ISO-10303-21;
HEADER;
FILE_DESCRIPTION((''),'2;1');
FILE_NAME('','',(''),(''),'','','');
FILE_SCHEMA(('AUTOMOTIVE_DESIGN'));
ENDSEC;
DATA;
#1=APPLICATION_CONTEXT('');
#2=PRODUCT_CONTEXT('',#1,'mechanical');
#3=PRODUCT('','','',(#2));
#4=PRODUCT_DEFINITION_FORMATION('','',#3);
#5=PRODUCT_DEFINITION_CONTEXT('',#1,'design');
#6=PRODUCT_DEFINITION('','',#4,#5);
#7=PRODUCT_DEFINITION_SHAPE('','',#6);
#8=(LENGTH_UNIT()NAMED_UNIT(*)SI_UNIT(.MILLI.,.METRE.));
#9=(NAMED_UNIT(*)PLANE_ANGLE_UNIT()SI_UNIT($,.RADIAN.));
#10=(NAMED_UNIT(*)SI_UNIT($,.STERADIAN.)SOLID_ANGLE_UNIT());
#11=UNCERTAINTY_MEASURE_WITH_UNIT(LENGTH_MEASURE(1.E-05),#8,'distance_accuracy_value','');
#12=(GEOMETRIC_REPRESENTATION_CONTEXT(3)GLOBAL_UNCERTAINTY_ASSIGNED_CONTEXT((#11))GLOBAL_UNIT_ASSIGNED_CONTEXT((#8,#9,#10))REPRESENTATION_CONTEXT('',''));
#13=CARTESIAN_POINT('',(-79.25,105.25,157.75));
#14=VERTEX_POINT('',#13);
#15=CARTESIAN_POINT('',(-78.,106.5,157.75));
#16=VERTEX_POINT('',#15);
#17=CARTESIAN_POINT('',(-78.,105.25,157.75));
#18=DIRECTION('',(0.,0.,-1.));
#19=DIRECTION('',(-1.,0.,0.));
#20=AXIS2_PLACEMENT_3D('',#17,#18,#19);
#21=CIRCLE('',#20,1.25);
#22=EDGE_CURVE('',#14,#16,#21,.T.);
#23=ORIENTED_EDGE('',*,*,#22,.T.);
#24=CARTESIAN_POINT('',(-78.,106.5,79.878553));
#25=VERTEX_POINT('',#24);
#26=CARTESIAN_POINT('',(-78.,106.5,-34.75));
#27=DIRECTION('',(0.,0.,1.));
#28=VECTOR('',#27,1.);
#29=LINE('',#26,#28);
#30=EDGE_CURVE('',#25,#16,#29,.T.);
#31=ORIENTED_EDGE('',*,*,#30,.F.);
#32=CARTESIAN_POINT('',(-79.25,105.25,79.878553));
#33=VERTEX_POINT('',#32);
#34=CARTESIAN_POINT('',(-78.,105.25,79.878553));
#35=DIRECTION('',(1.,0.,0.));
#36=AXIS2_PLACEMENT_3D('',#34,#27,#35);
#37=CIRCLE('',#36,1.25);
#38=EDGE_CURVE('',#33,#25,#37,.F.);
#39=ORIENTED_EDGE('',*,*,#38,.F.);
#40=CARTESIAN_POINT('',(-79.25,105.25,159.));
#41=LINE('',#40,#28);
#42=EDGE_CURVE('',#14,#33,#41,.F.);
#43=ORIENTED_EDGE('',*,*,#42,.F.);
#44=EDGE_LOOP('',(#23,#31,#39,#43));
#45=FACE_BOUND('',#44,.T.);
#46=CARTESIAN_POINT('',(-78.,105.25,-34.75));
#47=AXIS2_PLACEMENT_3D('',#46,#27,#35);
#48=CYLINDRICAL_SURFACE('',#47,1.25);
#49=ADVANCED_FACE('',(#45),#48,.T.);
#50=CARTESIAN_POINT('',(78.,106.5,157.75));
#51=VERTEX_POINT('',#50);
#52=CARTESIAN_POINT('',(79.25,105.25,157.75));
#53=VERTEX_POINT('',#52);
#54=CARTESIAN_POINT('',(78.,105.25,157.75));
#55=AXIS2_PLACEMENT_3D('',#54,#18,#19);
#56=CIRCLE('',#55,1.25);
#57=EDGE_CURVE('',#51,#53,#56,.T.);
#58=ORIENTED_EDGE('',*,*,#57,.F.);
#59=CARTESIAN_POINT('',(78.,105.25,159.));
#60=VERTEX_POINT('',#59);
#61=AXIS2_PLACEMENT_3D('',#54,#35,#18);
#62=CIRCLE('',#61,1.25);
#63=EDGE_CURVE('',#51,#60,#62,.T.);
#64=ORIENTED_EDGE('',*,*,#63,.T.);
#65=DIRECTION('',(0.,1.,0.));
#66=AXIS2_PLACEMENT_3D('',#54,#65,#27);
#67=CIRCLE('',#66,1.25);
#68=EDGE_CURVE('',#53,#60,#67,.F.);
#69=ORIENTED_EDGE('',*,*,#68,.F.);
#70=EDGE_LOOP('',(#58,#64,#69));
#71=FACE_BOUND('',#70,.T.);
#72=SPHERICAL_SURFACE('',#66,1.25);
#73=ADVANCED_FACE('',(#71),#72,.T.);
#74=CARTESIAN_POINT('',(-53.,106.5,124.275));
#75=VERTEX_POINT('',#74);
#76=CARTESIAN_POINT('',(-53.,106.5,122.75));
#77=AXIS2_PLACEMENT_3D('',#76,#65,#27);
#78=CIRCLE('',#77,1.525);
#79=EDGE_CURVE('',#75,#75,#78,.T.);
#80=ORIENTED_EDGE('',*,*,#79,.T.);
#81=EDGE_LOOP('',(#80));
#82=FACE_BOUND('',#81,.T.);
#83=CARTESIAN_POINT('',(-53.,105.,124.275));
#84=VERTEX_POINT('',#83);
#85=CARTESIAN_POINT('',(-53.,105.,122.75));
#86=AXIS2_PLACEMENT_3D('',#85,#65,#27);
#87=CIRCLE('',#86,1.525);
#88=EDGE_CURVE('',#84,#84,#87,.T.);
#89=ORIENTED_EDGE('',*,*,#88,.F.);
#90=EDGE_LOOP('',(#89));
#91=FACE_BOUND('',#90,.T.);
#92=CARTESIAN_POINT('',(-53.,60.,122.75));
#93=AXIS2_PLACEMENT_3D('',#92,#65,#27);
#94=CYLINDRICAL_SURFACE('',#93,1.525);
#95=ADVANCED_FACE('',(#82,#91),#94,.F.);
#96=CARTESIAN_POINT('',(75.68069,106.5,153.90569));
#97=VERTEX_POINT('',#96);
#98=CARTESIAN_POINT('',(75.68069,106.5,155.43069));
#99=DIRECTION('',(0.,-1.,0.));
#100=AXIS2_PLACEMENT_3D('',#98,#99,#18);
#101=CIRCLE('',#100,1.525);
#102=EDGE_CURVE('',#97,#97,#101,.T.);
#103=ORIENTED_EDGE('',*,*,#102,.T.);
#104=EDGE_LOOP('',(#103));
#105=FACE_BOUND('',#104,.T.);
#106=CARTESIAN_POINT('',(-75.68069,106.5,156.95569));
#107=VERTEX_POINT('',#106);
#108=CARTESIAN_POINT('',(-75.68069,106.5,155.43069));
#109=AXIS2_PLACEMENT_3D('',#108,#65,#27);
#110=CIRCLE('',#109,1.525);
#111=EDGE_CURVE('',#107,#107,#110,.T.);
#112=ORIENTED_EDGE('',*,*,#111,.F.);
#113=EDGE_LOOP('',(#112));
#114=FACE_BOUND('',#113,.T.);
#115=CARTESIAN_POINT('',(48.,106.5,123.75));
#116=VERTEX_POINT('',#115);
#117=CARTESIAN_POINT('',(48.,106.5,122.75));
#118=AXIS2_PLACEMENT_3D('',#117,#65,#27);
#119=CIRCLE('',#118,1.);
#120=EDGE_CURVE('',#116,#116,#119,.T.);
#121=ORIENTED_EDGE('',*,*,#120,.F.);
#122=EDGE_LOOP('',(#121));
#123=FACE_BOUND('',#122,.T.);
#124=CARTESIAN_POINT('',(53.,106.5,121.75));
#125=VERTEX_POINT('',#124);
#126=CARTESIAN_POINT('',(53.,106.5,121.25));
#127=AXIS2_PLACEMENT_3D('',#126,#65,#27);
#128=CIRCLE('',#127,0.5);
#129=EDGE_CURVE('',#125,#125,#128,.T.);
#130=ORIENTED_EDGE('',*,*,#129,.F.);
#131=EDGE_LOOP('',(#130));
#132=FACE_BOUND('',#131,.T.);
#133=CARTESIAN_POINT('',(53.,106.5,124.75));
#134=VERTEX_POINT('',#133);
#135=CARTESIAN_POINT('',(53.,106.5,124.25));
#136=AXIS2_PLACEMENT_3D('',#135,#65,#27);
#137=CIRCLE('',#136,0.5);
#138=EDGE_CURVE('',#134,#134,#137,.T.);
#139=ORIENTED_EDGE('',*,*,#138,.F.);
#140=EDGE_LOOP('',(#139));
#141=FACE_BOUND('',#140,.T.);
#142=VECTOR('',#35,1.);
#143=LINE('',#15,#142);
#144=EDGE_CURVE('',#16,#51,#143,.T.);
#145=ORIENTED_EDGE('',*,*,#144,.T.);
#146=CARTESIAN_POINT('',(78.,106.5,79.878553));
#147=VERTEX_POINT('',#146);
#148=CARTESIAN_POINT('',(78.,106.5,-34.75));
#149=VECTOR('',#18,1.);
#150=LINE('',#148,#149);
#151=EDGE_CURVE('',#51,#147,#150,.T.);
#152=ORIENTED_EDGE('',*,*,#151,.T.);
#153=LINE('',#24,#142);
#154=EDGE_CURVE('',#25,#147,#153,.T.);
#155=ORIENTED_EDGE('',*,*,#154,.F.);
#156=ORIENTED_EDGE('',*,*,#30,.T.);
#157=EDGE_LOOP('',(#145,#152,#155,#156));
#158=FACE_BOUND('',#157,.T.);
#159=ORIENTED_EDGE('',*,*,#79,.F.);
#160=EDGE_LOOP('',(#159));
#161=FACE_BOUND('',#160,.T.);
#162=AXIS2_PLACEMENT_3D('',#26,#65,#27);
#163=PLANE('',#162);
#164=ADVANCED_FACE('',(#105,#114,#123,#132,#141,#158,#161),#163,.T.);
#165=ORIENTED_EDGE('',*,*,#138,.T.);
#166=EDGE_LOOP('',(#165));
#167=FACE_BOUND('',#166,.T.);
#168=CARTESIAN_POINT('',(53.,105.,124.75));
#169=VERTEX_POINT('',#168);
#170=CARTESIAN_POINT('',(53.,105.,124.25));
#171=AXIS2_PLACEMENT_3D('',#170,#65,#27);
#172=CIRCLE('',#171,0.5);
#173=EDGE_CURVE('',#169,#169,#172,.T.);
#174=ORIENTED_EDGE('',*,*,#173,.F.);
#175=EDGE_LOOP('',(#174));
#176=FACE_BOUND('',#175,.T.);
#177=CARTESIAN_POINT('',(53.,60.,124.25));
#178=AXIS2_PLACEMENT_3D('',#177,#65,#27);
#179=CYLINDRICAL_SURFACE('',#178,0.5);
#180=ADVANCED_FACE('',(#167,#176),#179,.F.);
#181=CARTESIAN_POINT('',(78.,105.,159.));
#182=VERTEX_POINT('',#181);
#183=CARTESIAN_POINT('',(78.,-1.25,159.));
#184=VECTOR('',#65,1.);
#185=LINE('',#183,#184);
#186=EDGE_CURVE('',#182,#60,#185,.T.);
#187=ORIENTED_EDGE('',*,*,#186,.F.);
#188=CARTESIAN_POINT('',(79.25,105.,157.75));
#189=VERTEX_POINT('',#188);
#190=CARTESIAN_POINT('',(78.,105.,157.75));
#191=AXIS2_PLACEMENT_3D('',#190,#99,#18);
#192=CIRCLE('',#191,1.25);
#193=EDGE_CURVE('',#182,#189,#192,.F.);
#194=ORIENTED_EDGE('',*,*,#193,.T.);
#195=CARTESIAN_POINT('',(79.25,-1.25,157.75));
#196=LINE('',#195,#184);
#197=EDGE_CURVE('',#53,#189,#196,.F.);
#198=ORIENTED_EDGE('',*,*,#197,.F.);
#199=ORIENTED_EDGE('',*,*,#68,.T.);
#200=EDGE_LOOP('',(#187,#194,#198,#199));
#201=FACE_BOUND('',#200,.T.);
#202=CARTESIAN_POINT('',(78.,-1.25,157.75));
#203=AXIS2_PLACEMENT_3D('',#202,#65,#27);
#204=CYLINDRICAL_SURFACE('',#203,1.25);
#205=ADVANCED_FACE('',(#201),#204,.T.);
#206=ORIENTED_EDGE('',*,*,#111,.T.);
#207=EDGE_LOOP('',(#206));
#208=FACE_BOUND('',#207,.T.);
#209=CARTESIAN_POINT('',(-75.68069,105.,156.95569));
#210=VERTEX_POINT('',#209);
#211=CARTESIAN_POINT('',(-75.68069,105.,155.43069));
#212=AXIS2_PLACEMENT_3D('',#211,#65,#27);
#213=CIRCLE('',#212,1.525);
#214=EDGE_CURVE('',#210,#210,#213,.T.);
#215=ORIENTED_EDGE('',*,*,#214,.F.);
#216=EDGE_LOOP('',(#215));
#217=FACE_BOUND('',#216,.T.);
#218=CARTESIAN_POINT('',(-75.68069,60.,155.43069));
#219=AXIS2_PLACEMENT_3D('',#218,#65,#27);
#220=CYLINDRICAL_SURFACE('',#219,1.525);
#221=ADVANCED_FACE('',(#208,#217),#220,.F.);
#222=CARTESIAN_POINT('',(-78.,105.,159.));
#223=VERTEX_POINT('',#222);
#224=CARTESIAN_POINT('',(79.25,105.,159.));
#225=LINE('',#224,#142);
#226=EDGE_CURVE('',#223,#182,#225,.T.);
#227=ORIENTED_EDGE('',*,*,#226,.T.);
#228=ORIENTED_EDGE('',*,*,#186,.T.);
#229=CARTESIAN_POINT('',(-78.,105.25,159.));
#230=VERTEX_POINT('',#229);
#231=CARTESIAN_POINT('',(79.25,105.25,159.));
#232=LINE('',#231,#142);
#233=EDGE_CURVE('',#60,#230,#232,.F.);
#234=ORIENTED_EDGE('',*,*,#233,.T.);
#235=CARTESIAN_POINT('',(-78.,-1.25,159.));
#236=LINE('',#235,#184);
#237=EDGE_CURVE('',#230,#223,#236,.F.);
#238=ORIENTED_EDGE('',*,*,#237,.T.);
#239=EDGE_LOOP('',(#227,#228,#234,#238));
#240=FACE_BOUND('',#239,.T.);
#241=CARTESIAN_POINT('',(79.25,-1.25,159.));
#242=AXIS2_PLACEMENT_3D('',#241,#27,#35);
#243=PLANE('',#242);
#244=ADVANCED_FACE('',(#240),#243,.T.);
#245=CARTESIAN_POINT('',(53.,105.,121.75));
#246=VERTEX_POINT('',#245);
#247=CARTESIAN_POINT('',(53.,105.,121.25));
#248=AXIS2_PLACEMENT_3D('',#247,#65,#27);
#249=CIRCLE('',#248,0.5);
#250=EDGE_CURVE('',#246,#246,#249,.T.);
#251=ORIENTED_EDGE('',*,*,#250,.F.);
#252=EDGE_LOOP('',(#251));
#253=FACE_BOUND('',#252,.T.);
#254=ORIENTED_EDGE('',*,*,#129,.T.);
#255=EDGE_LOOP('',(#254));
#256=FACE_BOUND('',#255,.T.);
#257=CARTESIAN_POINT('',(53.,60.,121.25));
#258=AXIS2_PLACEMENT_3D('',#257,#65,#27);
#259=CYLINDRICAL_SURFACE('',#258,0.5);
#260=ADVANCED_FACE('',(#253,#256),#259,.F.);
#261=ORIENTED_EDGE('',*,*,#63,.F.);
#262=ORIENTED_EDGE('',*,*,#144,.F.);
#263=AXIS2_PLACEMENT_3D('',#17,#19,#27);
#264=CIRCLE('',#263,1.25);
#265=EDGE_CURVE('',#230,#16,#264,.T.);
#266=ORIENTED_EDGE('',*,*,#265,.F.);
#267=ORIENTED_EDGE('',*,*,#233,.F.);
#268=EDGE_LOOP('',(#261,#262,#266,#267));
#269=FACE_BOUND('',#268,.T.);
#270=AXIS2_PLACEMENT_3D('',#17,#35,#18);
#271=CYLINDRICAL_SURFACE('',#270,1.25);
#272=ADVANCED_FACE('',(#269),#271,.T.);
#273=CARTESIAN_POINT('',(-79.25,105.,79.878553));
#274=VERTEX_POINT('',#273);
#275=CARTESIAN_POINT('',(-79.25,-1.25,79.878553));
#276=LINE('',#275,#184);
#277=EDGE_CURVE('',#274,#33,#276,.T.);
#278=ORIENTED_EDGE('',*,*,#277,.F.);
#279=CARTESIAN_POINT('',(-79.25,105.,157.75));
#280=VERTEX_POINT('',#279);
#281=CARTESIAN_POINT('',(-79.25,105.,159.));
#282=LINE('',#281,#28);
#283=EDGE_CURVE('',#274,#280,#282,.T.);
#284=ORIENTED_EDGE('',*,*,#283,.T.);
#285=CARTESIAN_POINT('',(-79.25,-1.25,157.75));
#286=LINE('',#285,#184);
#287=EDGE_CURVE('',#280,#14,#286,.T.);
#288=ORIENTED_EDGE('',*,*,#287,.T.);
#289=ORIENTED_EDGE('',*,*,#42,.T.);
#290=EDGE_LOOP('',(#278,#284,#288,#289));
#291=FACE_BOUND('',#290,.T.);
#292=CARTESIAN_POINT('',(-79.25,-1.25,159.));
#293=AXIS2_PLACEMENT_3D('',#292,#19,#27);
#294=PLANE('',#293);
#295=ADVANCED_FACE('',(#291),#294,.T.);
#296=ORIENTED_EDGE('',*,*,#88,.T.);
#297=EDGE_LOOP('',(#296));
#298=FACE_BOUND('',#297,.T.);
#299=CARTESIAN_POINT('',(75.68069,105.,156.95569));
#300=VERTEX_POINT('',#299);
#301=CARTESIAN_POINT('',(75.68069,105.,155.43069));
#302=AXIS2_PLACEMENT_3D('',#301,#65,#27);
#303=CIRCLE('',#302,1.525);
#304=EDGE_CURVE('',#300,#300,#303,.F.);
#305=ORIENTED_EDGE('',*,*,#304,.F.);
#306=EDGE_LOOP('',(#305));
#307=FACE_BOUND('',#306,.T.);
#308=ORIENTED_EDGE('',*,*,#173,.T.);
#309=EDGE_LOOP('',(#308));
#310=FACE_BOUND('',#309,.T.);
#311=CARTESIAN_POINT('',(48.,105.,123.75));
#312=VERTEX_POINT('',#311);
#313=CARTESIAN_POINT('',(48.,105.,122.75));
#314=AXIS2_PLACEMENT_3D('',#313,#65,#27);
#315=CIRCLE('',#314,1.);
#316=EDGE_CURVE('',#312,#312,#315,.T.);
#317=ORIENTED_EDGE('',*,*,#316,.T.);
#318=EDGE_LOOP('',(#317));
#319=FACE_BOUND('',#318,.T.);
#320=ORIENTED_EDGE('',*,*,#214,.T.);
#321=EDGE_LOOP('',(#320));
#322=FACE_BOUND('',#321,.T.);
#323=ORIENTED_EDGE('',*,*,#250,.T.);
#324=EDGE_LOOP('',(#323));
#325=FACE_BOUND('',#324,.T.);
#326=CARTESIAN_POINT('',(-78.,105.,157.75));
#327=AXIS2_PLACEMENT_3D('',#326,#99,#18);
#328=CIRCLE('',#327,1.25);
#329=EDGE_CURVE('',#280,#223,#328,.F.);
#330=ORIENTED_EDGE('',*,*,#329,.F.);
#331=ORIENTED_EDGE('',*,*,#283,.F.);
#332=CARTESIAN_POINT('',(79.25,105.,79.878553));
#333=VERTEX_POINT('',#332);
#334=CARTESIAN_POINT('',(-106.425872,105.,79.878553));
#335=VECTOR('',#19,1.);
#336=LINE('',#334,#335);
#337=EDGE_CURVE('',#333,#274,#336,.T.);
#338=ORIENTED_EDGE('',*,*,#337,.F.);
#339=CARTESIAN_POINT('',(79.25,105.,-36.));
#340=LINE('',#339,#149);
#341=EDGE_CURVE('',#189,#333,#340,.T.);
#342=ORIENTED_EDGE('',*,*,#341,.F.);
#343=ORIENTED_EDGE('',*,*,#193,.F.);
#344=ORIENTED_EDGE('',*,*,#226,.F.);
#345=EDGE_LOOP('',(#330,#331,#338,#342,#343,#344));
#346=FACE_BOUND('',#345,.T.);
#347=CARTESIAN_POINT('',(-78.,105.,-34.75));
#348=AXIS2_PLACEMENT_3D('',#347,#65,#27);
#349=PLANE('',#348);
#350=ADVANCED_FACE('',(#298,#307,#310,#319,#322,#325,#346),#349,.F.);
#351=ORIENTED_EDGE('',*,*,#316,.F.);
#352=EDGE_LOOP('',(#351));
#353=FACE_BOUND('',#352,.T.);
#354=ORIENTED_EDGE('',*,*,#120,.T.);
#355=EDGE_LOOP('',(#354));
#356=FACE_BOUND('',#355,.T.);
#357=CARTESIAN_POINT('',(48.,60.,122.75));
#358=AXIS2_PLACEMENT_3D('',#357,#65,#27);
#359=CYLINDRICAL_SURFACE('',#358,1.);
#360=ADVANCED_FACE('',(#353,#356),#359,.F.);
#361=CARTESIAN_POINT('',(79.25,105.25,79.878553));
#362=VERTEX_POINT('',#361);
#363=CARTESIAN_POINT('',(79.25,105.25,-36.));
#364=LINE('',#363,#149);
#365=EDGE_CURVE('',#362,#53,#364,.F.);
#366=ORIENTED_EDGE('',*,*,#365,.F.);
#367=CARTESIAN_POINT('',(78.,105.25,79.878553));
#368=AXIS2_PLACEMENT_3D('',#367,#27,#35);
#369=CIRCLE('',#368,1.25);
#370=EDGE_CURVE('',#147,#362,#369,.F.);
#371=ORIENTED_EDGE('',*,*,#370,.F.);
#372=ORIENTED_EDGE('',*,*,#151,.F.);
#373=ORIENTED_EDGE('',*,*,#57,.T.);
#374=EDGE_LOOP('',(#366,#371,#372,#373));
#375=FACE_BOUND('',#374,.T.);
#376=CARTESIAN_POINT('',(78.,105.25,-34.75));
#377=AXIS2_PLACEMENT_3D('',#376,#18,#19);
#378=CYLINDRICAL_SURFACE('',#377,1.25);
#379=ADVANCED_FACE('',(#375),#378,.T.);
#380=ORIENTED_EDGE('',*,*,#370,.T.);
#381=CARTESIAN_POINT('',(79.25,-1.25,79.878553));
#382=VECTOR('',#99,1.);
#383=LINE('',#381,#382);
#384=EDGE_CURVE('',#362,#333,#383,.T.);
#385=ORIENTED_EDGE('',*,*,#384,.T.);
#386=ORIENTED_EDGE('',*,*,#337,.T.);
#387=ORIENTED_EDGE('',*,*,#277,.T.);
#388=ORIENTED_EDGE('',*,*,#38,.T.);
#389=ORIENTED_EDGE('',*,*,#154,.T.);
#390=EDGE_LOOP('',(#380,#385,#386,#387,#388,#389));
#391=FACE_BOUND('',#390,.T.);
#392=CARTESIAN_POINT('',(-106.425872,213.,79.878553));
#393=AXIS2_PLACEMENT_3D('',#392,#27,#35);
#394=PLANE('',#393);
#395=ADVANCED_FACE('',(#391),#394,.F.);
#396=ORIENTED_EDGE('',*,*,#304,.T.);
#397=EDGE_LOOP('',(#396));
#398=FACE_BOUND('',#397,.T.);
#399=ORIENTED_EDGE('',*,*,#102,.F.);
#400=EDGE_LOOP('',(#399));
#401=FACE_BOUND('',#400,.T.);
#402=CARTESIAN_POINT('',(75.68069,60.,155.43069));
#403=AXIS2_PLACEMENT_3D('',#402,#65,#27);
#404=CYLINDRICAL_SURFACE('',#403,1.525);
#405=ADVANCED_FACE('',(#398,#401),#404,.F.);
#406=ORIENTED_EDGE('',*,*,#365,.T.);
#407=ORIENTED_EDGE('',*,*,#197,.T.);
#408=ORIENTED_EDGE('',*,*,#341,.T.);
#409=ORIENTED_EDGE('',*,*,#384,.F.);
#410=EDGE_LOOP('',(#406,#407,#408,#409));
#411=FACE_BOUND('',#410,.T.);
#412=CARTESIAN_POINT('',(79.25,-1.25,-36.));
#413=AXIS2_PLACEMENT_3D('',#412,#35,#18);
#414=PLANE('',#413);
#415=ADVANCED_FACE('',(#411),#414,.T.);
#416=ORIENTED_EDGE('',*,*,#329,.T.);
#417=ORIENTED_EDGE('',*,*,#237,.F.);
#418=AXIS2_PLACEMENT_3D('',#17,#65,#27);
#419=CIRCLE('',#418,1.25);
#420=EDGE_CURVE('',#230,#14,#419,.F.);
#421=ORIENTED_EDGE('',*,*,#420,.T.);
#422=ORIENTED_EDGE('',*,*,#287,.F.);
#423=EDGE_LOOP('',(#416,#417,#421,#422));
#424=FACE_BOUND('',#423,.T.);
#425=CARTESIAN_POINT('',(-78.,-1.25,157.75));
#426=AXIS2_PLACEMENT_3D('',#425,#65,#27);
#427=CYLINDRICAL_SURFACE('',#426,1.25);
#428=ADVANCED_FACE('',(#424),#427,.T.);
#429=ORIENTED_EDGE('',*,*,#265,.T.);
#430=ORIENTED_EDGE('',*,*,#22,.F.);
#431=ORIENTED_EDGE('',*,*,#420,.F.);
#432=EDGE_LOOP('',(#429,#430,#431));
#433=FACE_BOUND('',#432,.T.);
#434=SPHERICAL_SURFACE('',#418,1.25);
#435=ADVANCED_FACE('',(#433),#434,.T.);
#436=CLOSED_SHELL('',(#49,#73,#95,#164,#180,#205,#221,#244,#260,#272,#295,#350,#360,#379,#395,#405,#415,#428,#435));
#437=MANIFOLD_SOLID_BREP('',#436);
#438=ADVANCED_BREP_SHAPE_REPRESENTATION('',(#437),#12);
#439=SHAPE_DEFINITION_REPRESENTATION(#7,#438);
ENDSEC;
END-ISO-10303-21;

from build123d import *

# Parameters (mm, degrees)
BOSS_EXTRUDE1_DEPTH      = 1.25
SKETCH1_W                = 156
SKETCH1_H                = 69.5
BOSS_EXTRUDE2_DEPTH      = 105
SKETCH4_R                = 2.5000000000000027
BOSS_EXTRUDE3_DEPTH      = 8
FILLET2_R                = 2
SKETCH5_R                = 1.5499999999999998
SKETCH5_R_2              = 1.5500000000000012
CUT_EXTRUDE1_DEPTH       = 8
SKETCH6_R                = 8.25
CUT_EXTRUDE2_DEPTH       = 8
SKETCH8_R                = 3.750000000000007
SKETCH8_R_2              = 3.0000000000000084
SKETCH8_W                = 7.000000000000014
SKETCH8_H                = 14
CUT_EXTRUDE3_DEPTH       = 8
FILLET3_R                = 1.25
FILLET4_R                = 1.25
SKETCH11_R               = 1.5499999999999932
CUT_EXTRUDE4_DEPTH       = 8
BOSS_EXTRUDE5_REACH      = 209.004
FILLET5_R                = 1.25
SKETCH14_R               = 1.5249999999999995
CUT_EXTRUDE5_DEPTH       = 8
BOSS_EXTRUDE6_DEPTH      = 5
CUT_EXTRUDE10_DEPTH      = 176.50000000000017
CUT_EXTRUDE10_DEPTH_BACK = 9
SKETCH19_R               = 1.5249999999999995
BOSS_EXTRUDE7_DEPTH      = 1.5
SKETCH17_W               = 214.39373035957487
SKETCH17_H               = 311.75060194691184
CUT_EXTRUDE6_DEPTH       = 142.50000000000003
SKETCH18_W               = 843.8612520819788
SKETCH18_H               = 210.19069540658822
CUT_EXTRUDE7_DEPTH       = 211.50000000000009
FILLET6_R                = 1.25
SKETCH21_R               = 1.5249999999999995
CUT_EXTRUDE11_DEPTH      = 46.50000000000004
SKETCH22_R               = 1.5249999999999952
SKETCH22_R_2             = 0.49999999999999917
SKETCH22_R_3             = 0.9999999999999983
CUT_EXTRUDE12_DEPTH      = 46.50000000000004
SKETCH23_W               = 224.34927592813784
SKETCH23_H               = 20
CUT_EXTRUDE13_DEPTH      = 108.00000000000004
SKETCH24_W               = 191.54769742783472
SKETCH24_H               = 65.90413284325967
CUT_EXTRUDE14_DEPTH      = 151.00000000000006


with BuildPart() as part:
    # Sketch2 → Boss-Extrude1 (new body)
    with BuildSketch(Plane(origin=(0, 0, 0), x_dir=(1, 0, 0), z_dir=(0, 1, 0))):
        Polygon((-79.25000000000004, 35.99999999999998), (79.24999999999996, 35.99999999999999), (79.24999999999999, -159.00000000000003), (-79.25000000000001, -159.00000000000003), align=None)
    extrude(amount=-BOSS_EXTRUDE1_DEPTH)

    # Sketch1 → Boss-Extrude2 (add)
    with BuildSketch(Plane(origin=(0, 0, 0), x_dir=(1, 0, 0), z_dir=(0, 1, 0))):
        Polygon((79.24999999999999, -159.00000000000003), (-79.25000000000001, -159.00000000000003), (-79.25000000000004, -86.00000000000001), (-79.25000000000004, -36.00000000000002), (-79.25000000000004, 35.99999999999998), (79.24999999999996, 35.99999999999999), (79.24999999999996, -36.00000000000002), (79.24999999999996, -86.00000000000001), align=None)
        Polygon((-78.00000000000001, -157.75000000000006), (77.99999999999999, -157.75000000000006), (77.99999999999996, -86.00000000000001), (77.99999999999996, -36.00000000000002), (-78.00000000000004, -36.00000000000002), (-78.00000000000004, -86.00000000000001), (-78.00000000000004, -100.58859756900745), align=None, mode=Mode.SUBTRACT)
        Rectangle(SKETCH1_W, SKETCH1_H, mode=Mode.SUBTRACT)
    extrude(amount=BOSS_EXTRUDE2_DEPTH)

    # Sketch4 → Boss-Extrude3 (add)
    with BuildSketch(Plane(origin=(0, 0, 0), x_dir=(1, 0, 0), z_dir=(0, 1, 0))):
        with Locations(Location((-37.074999999999996, -117.75000000000004, 0), (0, 0, 90))):
            Circle(SKETCH4_R)
        with Locations(Location((37.074999999999996, -117.75000000000003, 0), (0, 0, 90))):
            Circle(SKETCH4_R)
    extrude(amount=BOSS_EXTRUDE3_DEPTH)

    # Fillet2
    fillet2_edges = [part.edges().sort_by_distance(p)[0] for p in [
        (77.99999999999996, 52.5, -34.749999999999986),
        (77.99999999999996, 52.5, 34.750000000000014),
        (-78.00000000000004, 0, 1.421e-14),
        (-78.00000000000004, 52.5, 34.750000000000014),
        (77.99999999999999, 52.5, 157.75000000000006),
        (-78.00000000000001, 52.5, 157.75000000000006),
        (-4.263e-14, 0, 36.00000000000002),
        (-78.00000000000004, 52.5, 36.00000000000002),
        (77.99999999999997, 0, 96.87500000000003),
        (77.99999999999996, 52.5, 36.00000000000002),
        (-4.263e-14, 0, -34.749999999999986),
        (-78.00000000000004, 52.5, -34.749999999999986),
        (-1.421e-14, 0, 157.75000000000006),
        (-78.00000000000003, 0, 96.87500000000004),
        (77.99999999999996, 0, 1.421e-14),
        (-4.263e-14, 0, 34.750000000000014),
        (-37.074999999999996, 0, 120.25000000000004),
        (37.074999999999996, 0, 120.25000000000003),
    ]]
    fillet(fillet2_edges, radius=FILLET2_R)

    # Sketch5 → Cut-Extrude1 (cut)
    with BuildSketch(Plane.XY.offset(36.00000000000002)):
        with BuildLine():
            ThreePointArc((-53.750000000000085, 99.54999999999998), (-54.84601551083924, 99.09601551083914), (-55.30000000000008, 97.99999999999999))
            Line((-55.30000000000008, 97.99999999999999), (-53.750000000000085, 97.99999999999999))
            Line((-53.750000000000085, 97.99999999999999), (-53.750000000000085, 99.54999999999998))
        make_face()
        with BuildLine():
            Line((-53.750000000000085, 97.99999999999999), (-55.30000000000008, 97.99999999999999))
            ThreePointArc((-55.30000000000008, 97.99999999999999), (-53.750000000000085, 96.44999999999999), (-52.20000000000009, 97.99999999999999))
            ThreePointArc((-52.20000000000009, 97.99999999999999), (-52.65398448916093, 99.09601551083914), (-53.750000000000085, 99.54999999999998))
            Line((-53.750000000000085, 99.54999999999998), (-53.750000000000085, 97.99999999999999))
        make_face()
        with Locations((53.750000000000206, 97.99999999999967)):
            Circle(SKETCH5_R)
        with Locations((-53.750000000000085, 7.999999999999743)):
            Circle(SKETCH5_R_2)
        with Locations((53.749999999999666, 7.9999999999994245)):
            Circle(SKETCH5_R_2)
    extrude(amount=-CUT_EXTRUDE1_DEPTH, mode=Mode.SUBTRACT)

    # Sketch6 → Cut-Extrude2 (cut)
    with BuildSketch(Plane(origin=(0, 0, 157.75000000000006), x_dir=(-1, 0, 0), z_dir=(0, 0, -1))):
        with Locations((0, 22)):
            Circle(SKETCH6_R)
    extrude(amount=-CUT_EXTRUDE2_DEPTH, mode=Mode.SUBTRACT)

    # Sketch8 → Cut-Extrude3 (cut)
    with BuildSketch(Plane.ZY.offset(79.25000000000004)):
        with Locations((131.5, 54.99999999999998)):
            Circle(SKETCH8_R)
        with Locations((101.50000000000001, 54.99999999999998)):
            Circle(SKETCH8_R_2)
        with Locations((116.50000000000003, 64.99999999999999)):
            Rectangle(SKETCH8_W, SKETCH8_H)
        with Locations((101.50000000000001, 64.99999999999997)):
            Circle(SKETCH8_R_2)
        with Locations((101.50000000000001, 74.99999999999997)):
            Circle(SKETCH8_R_2)
        with Locations((101.50000000000001, 84.99999999999997)):
            Circle(SKETCH8_R_2)
        with Locations((131.5, 74.99999999999999)):
            Circle(SKETCH8_R)
    extrude(amount=-CUT_EXTRUDE3_DEPTH, mode=Mode.SUBTRACT)

    # Fillet3
    fillet3_edges = [part.edges().sort_by_distance(p)[0] for p in [
        (79.24999999999997, -1.25, 61.50000000000002),
        (-4.263e-14, -1.25, -35.999999999999986),
        (-79.25000000000003, -1.25, 61.50000000000003),
        (-1.421e-14, -1.25, 159.00000000000003),
    ]]
    fillet(fillet3_edges, radius=FILLET3_R)

    # Fillet4
    # the kernel refuses this fillet: 1.25 mm, written as the material it takes off along each edge
    with BuildSketch(Plane(origin=(-78.00000000000004, 0, -34.74999999999997), x_dir=(-9e-17, 0, -1), z_dir=(-1, 0, 1.5e-16))) as fillet4_piece_1_section:
        Polygon((0, 0), (FILLET4_R, 0), (FILLET4_R, FILLET4_R), (0, FILLET4_R), align=None)
    fillet4_piece_1 = extrude(amount=FILLET4_R, mode=Mode.PRIVATE)
    fillet4_piece_1 = fillet4_piece_1 - Plane(origin=(-78.00000000000004, 0, -34.74999999999997), x_dir=(0, 0.7071067811865475, 0.7071067811865475), z_dir=(-1, 0, 1.5e-16)) * Sphere(FILLET4_R, mode=Mode.PRIVATE)
    add(fillet4_piece_1, mode=Mode.SUBTRACT)
    with BuildSketch(Plane(origin=(77.99999999999996, 0, -34.74999999999999), x_dir=(-9e-17, 0, -1), z_dir=(1, 0, -1.5e-16))) as fillet4_piece_2_section:
        Polygon((0, 0), (FILLET4_R, 0), (FILLET4_R, -FILLET4_R), (0, -FILLET4_R), align=None)
    fillet4_piece_2 = extrude(amount=FILLET4_R, mode=Mode.PRIVATE)
    fillet4_piece_2 = fillet4_piece_2 - Plane(origin=(77.99999999999996, 0, -34.74999999999999), x_dir=(0, 0.7071067811865475, 0.7071067811865475), z_dir=(1, 0, -1.5e-16)) * Sphere(FILLET4_R, mode=Mode.PRIVATE)
    add(fillet4_piece_2, mode=Mode.SUBTRACT)
    with BuildSketch(Plane(origin=(-78.00000000000001, 0, 157.75000000000003), x_dir=(-1, 0, 1.5e-16), z_dir=(0, 0, 1))) as fillet4_piece_3_section:
        Polygon((0, 0), (FILLET4_R, 0), (FILLET4_R, FILLET4_R), (0, FILLET4_R), align=None)
    fillet4_piece_3 = extrude(amount=FILLET4_R, mode=Mode.PRIVATE)
    fillet4_piece_3 = fillet4_piece_3 - Plane(origin=(-78.00000000000001, 0, 157.75000000000003), x_dir=(0.7071067811865475, 0.7071067811865475, 0), z_dir=(0, 0, 1)) * Sphere(FILLET4_R, mode=Mode.PRIVATE)
    add(fillet4_piece_3, mode=Mode.SUBTRACT)
    with BuildSketch(Plane(origin=(77.99999999999999, 0, 157.75000000000003), x_dir=(1, 0, -1.5e-16), z_dir=(0, 0, 1))) as fillet4_piece_4_section:
        Polygon((0, 0), (FILLET4_R, 0), (FILLET4_R, -FILLET4_R), (0, -FILLET4_R), align=None)
    fillet4_piece_4 = extrude(amount=FILLET4_R, mode=Mode.PRIVATE)
    fillet4_piece_4 = fillet4_piece_4 - Plane(origin=(77.99999999999999, 0, 157.75000000000003), x_dir=(-0.7071067811865475, 0.7071067811865475, 0), z_dir=(0, 0, 1)) * Sphere(FILLET4_R, mode=Mode.PRIVATE)
    add(fillet4_piece_4, mode=Mode.SUBTRACT)
    with BuildSketch(Plane(origin=(79.24999999999999, 108.12500000000007, 159.00000000000003), x_dir=(-1, 0, 0), z_dir=(0, -1, 0))) as fillet4_piece_5:
        with BuildLine():
            CenterArc((FILLET4_R, FILLET4_R), FILLET4_R, 179.9999999999987, 90.00000000000131)
            Line((0, FILLET4_R), (0, 0))
            Line((0, 0), (FILLET4_R, 0))
        make_face()
    extrude(amount=108.12500000000007, mode=Mode.SUBTRACT)
    with BuildSketch(Plane(origin=(-79.25000000000001, -2.2e-16, 159.00000000000003), x_dir=(1, 0, 0), z_dir=(0, 1, 0))) as fillet4_piece_6:
        with BuildLine():
            CenterArc((FILLET4_R, FILLET4_R), FILLET4_R, 180, 90)
            Line((0, FILLET4_R), (0, 0))
            Line((0, 0), (FILLET4_R, 0))
        make_face()
    extrude(amount=108.12499999999999, mode=Mode.SUBTRACT)
    with BuildSketch(Plane(origin=(79.24999999999996, 108.125, -35.99999999999999), x_dir=(0, 0, 1), z_dir=(0, -1, 0))) as fillet4_piece_7:
        with BuildLine():
            CenterArc((FILLET4_R, FILLET4_R), FILLET4_R, 180, 90)
            Line((0, FILLET4_R), (0, 0))
            Line((0, 0), (FILLET4_R, 0))
        make_face()
    extrude(amount=108.125, mode=Mode.SUBTRACT)
    with BuildSketch(Plane(origin=(-79.25000000000004, -2.2e-16, -35.99999999999998), x_dir=(0, 0, 1), z_dir=(0, 1, 0))) as fillet4_piece_8:
        with BuildLine():
            CenterArc((FILLET4_R, FILLET4_R), FILLET4_R, 180, 90)
            Line((-2.132e-14, FILLET4_R), (0, 0))
            Line((0, 0), (FILLET4_R, 0))
        make_face()
    extrude(amount=108.12499999999999, mode=Mode.SUBTRACT)

    # Sketch11 → Cut-Extrude4 (cut)
    with BuildSketch(Plane(origin=(79.24999999999996, 0, -1.128e-14), x_dir=(-1.4e-16, 0, -1), z_dir=(1, 0, -1.4e-16))):
        with BuildLine():
            ThreePointArc((-13.05000000000001, 102.49999999999999), (-12.596015510839159, 101.40398448916083), (-11.50000000000001, 100.94999999999999))
            Line((-11.50000000000001, 100.94999999999999), (-11.50000000000001, 102.49999999999999))
            Line((-11.500000000000014, 102.49999999999999), (-13.050000000000011, 102.49999999999999))
        make_face()
        with BuildLine():
            Line((-11.50000000000001, 102.49999999999999), (-11.50000000000001, 100.94999999999999))
            ThreePointArc((-11.50000000000001, 100.94999999999999), (-10.403984489160864, 101.40398448916083), (-9.950000000000012, 102.49999999999999))
            ThreePointArc((-9.950000000000012, 102.49999999999999), (-11.50000000000001, 104.04999999999998), (-13.05000000000001, 102.49999999999999))
            Line((-13.050000000000011, 102.49999999999999), (-11.500000000000014, 102.49999999999999))
        make_face()
        with BuildLine():
            ThreePointArc((-25.550000000000008, 90), (-25.096015510839155, 88.90398448916085), (-24.000000000000007, 88.45))
            Line((-24.000000000000007, 88.45000000000002), (-24.000000000000007, 90))
            Line((-24, 90), (-25.55000000000001, 90))
        make_face()
        with BuildLine():
            Line((-24.000000000000007, 90), (-24.000000000000007, 88.45000000000002))
            ThreePointArc((-24.000000000000007, 88.45), (-22.90398448916086, 88.90398448916085), (-22.450000000000006, 90))
            ThreePointArc((-22.450000000000006, 90), (-24.000000000000007, 91.55), (-25.550000000000008, 90))
            Line((-25.55000000000001, 90), (-24, 90))
        make_face()
        with BuildLine():
            ThreePointArc((-9.949999999999998, 2.4999999999999742), (-10.403984489160848, 3.5960155108391216), (-11.499999999999995, 4.049999999999974))
            Line((-11.499999999999996, 4.049999999999969), (-11.499999999999996, 2.4999999999999716))
            Line((-11.5, 2.4999999999999742), (-13.049999999999997, 2.4999999999999742))
            ThreePointArc((-13.049999999999995, 2.4999999999999742), (-11.499999999999996, 0.9499999999999749), (-9.949999999999998, 2.499999999999974))
        make_face()
        with BuildLine():
            Line((-11.499999999999996, 2.4999999999999716), (-11.499999999999996, 4.049999999999969))
            ThreePointArc((-11.499999999999995, 4.049999999999974), (-12.596015510839145, 3.596015510839123), (-13.049999999999995, 2.4999999999999742))
            Line((-13.049999999999997, 2.4999999999999742), (-11.5, 2.4999999999999742))
        make_face()
        with BuildLine():
            ThreePointArc((-111.5, 4.049999999999969), (-112.59601551083915, 1.40398448916083), (-109.95, 2.499999999999974))
            Line((-109.95, 2.4999999999999742), (-111.5, 2.4999999999999742))
            Line((-111.5, 2.4999999999999716), (-111.5, 4.049999999999969))
        make_face()
        with BuildLine():
            Line((-111.5, 2.4999999999999742), (-109.95, 2.4999999999999742))
            ThreePointArc((-109.95, 2.4999999999999742), (-110.40398448916086, 3.5960155108391185), (-111.5, 4.049999999999969))
            Line((-111.5, 4.049999999999969), (-111.5, 2.4999999999999716))
        make_face()
        with BuildLine():
            ThreePointArc((-97.45, 14.999999999999993), (-97.90398448916086, 16.096015510839138), (-99, 16.549999999999986))
            Line((-99, 16.549999999999986), (-99, 14.999999999999993))
            Line((-99, 14.999999999999993), (-97.45, 14.999999999999993))
        make_face()
        with BuildLine():
            Line((-99, 14.999999999999993), (-99, 16.549999999999986))
            ThreePointArc((-99, 16.549999999999986), (-100.09601551083915, 13.903984489160848), (-97.45, 14.999999999999993))
            Line((-97.45, 14.999999999999993), (-99, 14.999999999999993))
        make_face()
        with BuildLine():
            ThreePointArc((-22.450000000000006, 14.999999999999993), (-22.90398448916086, 16.09601551083914), (-24.000000000000007, 16.549999999999994))
            Line((-24.000000000000007, 16.549999999999994), (-24.000000000000007, 14.999999999999993))
            Line((-24, 14.999999999999993), (-25.55000000000001, 14.999999999999993))
            ThreePointArc((-25.550000000000008, 14.999999999999993), (-24.000000000000007, 13.449999999999992), (-22.450000000000006, 14.999999999999993))
        make_face()
        with BuildLine():
            Line((-24.000000000000007, 14.999999999999993), (-24.000000000000007, 16.549999999999994))
            ThreePointArc((-24.000000000000007, 16.549999999999994), (-25.096015510839155, 16.09601551083914), (-25.550000000000008, 14.999999999999993))
            Line((-25.55000000000001, 14.999999999999993), (-24, 14.999999999999993))
        make_face()
        with Locations((-111.50000000000001, 102.49999999999999)):
            Circle(SKETCH11_R)
        with Locations((-99, 90)):
            Circle(SKETCH11_R)
    extrude(amount=-CUT_EXTRUDE4_DEPTH, mode=Mode.SUBTRACT)

    # Boss-Extrude5: up to this face of the body (flat: up to its plane)
    boss_extrude5_end = Plane(part.part.faces().sort_by_distance((0, 0, 96.725539908))[0])
    # Sketch12 → Boss-Extrude5 (add, up to the picked face)
    with BuildSketch(Plane(origin=(0, 105, 0), x_dir=(1, 0, 0), z_dir=(0, 1, 0)), mode=Mode.PRIVATE) as boss_extrude5_sk1:
        with BuildLine():
            Line((73, -152.75000000000043), (72.99999999999997, -157.75000000000043))
            Line((72.99999999999997, -157.75000000000043), (75.99999999999996, -157.75000000000045))
            ThreePointArc((75.99999999999996, -157.75000000000006), (77.41421356237305, -157.16421356237316), (77.99999999999994, -155.75000000000006))
            Line((77.99999999999999, -155.75000000000006), (78, -152.75000000000045))
            Line((78, -152.75000000000045), (73, -152.75000000000043))
        make_face()
    boss_extrude5_tool1 = split(extrude(boss_extrude5_sk1.sketch, amount=-BOSS_EXTRUDE5_REACH, mode=Mode.PRIVATE), bisect_by=boss_extrude5_end, keep=Keep.BOTH, mode=Mode.PRIVATE)
    # Sketch12 → Boss-Extrude5 (add, up to the picked face)
    with BuildSketch(Plane(origin=(0, 105, 0), x_dir=(1, 0, 0), z_dir=(0, 1, 0)), mode=Mode.PRIVATE) as boss_extrude5_sk2:
        with BuildLine():
            ThreePointArc((-78.00000000000003, -155.75000000000006), (-77.41421356237313, -157.16421356237316), (-76.00000000000003, -157.75000000000006))
            Line((-76.00000000000003, -157.75000000000006), (-73.00000000000003, -157.75000000000006))
            Line((-73.00000000000003, -157.75000000000006), (-73.00000000000003, -152.75000000000006))
            Line((-73.00000000000003, -152.75000000000006), (-78.00000000000003, -152.75000000000006))
            Line((-78.00000000000003, -152.75000000000006), (-78.00000000000003, -155.75000000000006))
        make_face()
    boss_extrude5_tool2 = split(extrude(boss_extrude5_sk2.sketch, amount=-BOSS_EXTRUDE5_REACH, mode=Mode.PRIVATE), bisect_by=boss_extrude5_end, keep=Keep.BOTH, mode=Mode.PRIVATE)
    add(boss_extrude5_tool1.solids().sort_by(Axis((75.426992, 105, 155.176992), (0, -1, 0)))[0])
    add(boss_extrude5_tool2.solids().sort_by(Axis((-75.426992, 105, 155.176992), (0, -1, 0)))[0])

    # Fillet5
    fillet5_edges = [part.edges().sort_by_distance(p)[0] for p in [
        (77.41421356237306, 0.5857864376269042, 152.75000000000043),
        (72.99999999999999, 0.5857864376269046, 157.16421356237316),
        (72.99999999999997, 53.5, 157.75000000000043),
        (74.49999999999999, 0, 152.75000000000043),
        (73, 52.5, 152.75000000000043),
        (78, 53.5, 152.75000000000045),
        (73, 0, 154.25000000000023),
        (-77.41421356237313, 0.5857864376269042, 152.75000000000006),
        (-73.00000000000003, 0, 154.25000000000006),
        (-73.00000000000003, 52.5, 152.75000000000006),
        (-78.00000000000003, 53.5, 152.75000000000006),
        (-74.50000000000003, 0, 152.75000000000006),
        (-73.00000000000003, 0.5857864376269046, 157.16421356237316),
        (-73.00000000000003, 53.5, 157.75000000000006),
    ]]
    fillet(fillet5_edges, radius=FILLET5_R)

    # Sketch14 → Cut-Extrude5 (cut)
    with BuildSketch(Plane(origin=(0, 105, 0), x_dir=(1, 0, 0), z_dir=(0, 1, 0))):
        with Locations(Location((75.68305826175839, -155.43305826175865, 0), (0, 0, 270))):
            Circle(SKETCH14_R)
        with Locations(Location((-75.68305826175845, -155.43305826175828, 0), (0, 0, 270))):
            Circle(SKETCH14_R)
    extrude(amount=-CUT_EXTRUDE5_DEPTH, mode=Mode.SUBTRACT)

    # Sketch19 → Cut-Extrude10 (cut, two sides: drawn at the far end of the back side and taken through both)
    with BuildSketch(Plane(origin=(0, 105, 0), x_dir=(1, 0, 0), z_dir=(0, 1, 0)).offset(-CUT_EXTRUDE10_DEPTH_BACK)):
        with Locations(Location((75.68305826175839, -155.43305826175865, 0), (0, 0, 270))):
            Circle(SKETCH19_R)
        with Locations(Location((-75.68305826175845, -155.43305826175828, 0), (0, 0, 270))):
            Circle(SKETCH19_R)
    extrude(amount=CUT_EXTRUDE10_DEPTH + CUT_EXTRUDE10_DEPTH_BACK, mode=Mode.SUBTRACT)



with BuildPart() as body_2:
    # Sketch15 → Boss-Extrude6 (new body)
    with BuildSketch(Plane(origin=(0, 105, 0), x_dir=(1, 0, 0), z_dir=(0, 1, 0))):
        with BuildLine():
            Line((-77.50000000000004, 32.749999999999986), (-77.50000000000004, -32.750000000000014))
            ThreePointArc((-77.50000000000004, -32.750000000000014), (-77.06066017177986, -33.81066017177984), (-76.00000000000004, -34.250000000000014))
            Line((-76.00000000000004, -34.250000000000014), (75.99999999999996, -34.250000000000014))
            ThreePointArc((75.99999999999996, -34.250000000000014), (77.06066017177977, -33.81066017177984), (77.49999999999996, -32.750000000000014))
            Line((77.49999999999996, -32.750000000000014), (77.49999999999996, 32.749999999999986))
            ThreePointArc((77.49999999999996, 32.749999999999986), (77.06066017177977, 33.81066017177981), (75.99999999999996, 34.249999999999986))
            Line((75.99999999999996, 34.249999999999986), (-76.00000000000004, 34.249999999999986))
            ThreePointArc((-76.00000000000004, 34.249999999999986), (-77.06066017177986, 33.81066017177981), (-77.50000000000004, 32.749999999999986))
        make_face()
        with BuildLine():
            Line((75.99999999999996, 32.999999999999986), (-76.00000000000004, 32.999999999999986))
            ThreePointArc((-76.00000000000004, 32.999999999999986), (-76.17677669529668, 32.926776695296624), (-76.25000000000004, 32.749999999999986))
            Line((-76.25000000000004, 32.749999999999986), (-76.25000000000004, -32.750000000000014))
            ThreePointArc((-76.25000000000004, -32.750000000000014), (-76.17677669529668, -32.92677669529665), (-76.00000000000004, -33.000000000000014))
            Line((-76.00000000000004, -33.000000000000014), (75.99999999999996, -33.000000000000014))
            ThreePointArc((75.99999999999996, -33.000000000000014), (76.1767766952966, -32.92677669529665), (76.24999999999996, -32.750000000000014))
            Line((76.24999999999996, -32.750000000000014), (76.24999999999996, 32.749999999999986))
            ThreePointArc((76.24999999999996, 32.749999999999986), (76.1767766952966, 32.926776695296624), (75.99999999999996, 32.999999999999986))
        make_face(mode=Mode.SUBTRACT)
    extrude(amount=-BOSS_EXTRUDE6_DEPTH)


with BuildPart() as part_1:
    add(part.part)

    add(body_2.part)  # Boss-Extrude7 merges body 2
    # Sketch16 → Boss-Extrude7 (add)
    with BuildSketch(Plane(origin=(0, 105, 0), x_dir=(1, 0, 0), z_dir=(0, 1, 0))):
        with BuildLine():
            Line((-79.25000000000004, 34.74999999999998), (-79.25000000000004, -157.75000000000003))
            ThreePointArc((-79.25000000000004, -157.75000000000003), (-78.88388347648322, -158.63388347648322), (-78.00000000000001, -159.00000000000003))
            Line((-78.00000000000001, -159.00000000000003), (77.99999999999999, -159.00000000000003))
            ThreePointArc((77.99999999999999, -159.00000000000003), (78.88388347648316, -158.63388347648322), (79.24999999999999, -157.75000000000003))
            Line((79.24999999999999, -157.75000000000003), (79.24999999999991, 34.749999999999986))
            ThreePointArc((79.24999999999991, 34.749999999999986), (78.8838834764831, 35.63388347648314), (77.99999999999996, 35.99999999999997))
            Line((77.99999999999996, 35.99999999999997), (-78.00000000000004, 35.99999999999998))
            ThreePointArc((-78.00000000000004, 35.99999999999998), (-78.88388347648322, 35.63388347648316), (-79.25000000000004, 34.74999999999998))
        make_face()
    extrude(amount=BOSS_EXTRUDE7_DEPTH)

    # Sketch17 → Cut-Extrude6 (cut)
    with BuildSketch(Plane.XZ.offset(-105)):
        with Locations((-9.695908791144348, 54.3605461890202)):
            Rectangle(SKETCH17_W, SKETCH17_H)
        with BuildLine():
            Line((77.99999999999996, -32.749999999999986), (77.99999999999996, 32.750000000000014))
            ThreePointArc((77.99999999999996, 32.750000000000014), (77.41421356237305, 34.16421356237311), (75.99999999999996, 34.750000000000014))
            Line((75.99999999999996, 34.750000000000014), (-76.00000000000004, 34.750000000000014))
            ThreePointArc((-76.00000000000004, 34.750000000000014), (-77.41421356237313, 34.16421356237311), (-78.00000000000004, 32.750000000000014))
            Line((-78.00000000000004, 32.750000000000014), (-78.00000000000004, -32.749999999999986))
            ThreePointArc((-78.00000000000004, -32.749999999999986), (-77.41421356237313, -34.16421356237308), (-76.00000000000004, -34.749999999999986))
            Line((-76.00000000000004, -34.749999999999986), (75.99999999999996, -34.749999999999986))
            ThreePointArc((75.99999999999996, -34.749999999999986), (77.41421356237305, -34.16421356237308), (77.99999999999996, -32.749999999999986))
        make_face(mode=Mode.SUBTRACT)
    extrude(amount=CUT_EXTRUDE6_DEPTH, mode=Mode.SUBTRACT)


with BuildPart() as cut_extrude6_piece_1:
    # of the separate pieces the step leaves, piece 1, a body of its own (cut_extrude6_pieces)
    add(part_1.part.solids().sort_by_distance((-76, 105, -34.25))[0])

    # Fillet6
    fillet6_edges = [cut_extrude6_piece_1.edges().sort_by_distance(p)[0] for p in [
        (-78.88388347648322, 106.5, -35.633883476483156),
        (-79.25000000000004, 106.5, 61.50000000000002),
        (-78.88388347648322, 106.5, 158.63388347648322),
        (-1.421e-14, 106.5, 159.00000000000003),
        (78.88388347648318, 106.5, 158.63388347648322),
        (79.24999999999994, 106.5, 61.50000000000003),
        (78.8838834764831, 106.5, -35.63388347648314),
        (-4.263e-14, 106.5, -35.99999999999997),
    ]]
    fillet(fillet6_edges, radius=FILLET6_R)

    # Sketch21 → Cut-Extrude11 (cut)
    with BuildSketch(Plane(origin=(0, 106.5, 0), x_dir=(1, 0, 0), z_dir=(0, 1, 0))):
        with Locations(Location((-75.68068975770814, -155.43068975770817, 0), (0, 0, 270))):
            Circle(SKETCH21_R)
        with Locations(Location((75.68068975770811, -155.43068975770834, 0), (0, 0, 270))):
            Circle(SKETCH21_R)
    extrude(amount=-CUT_EXTRUDE11_DEPTH, mode=Mode.SUBTRACT)

    # Sketch22 → Cut-Extrude12 (cut)
    with BuildSketch(Plane(origin=(0, 106.5, 0), x_dir=(1, 0, 0), z_dir=(0, 1, 0))):
        with Locations(Location((-53.000000000000014, -122.75000000000003, 0), (0, 0, 270))):
            Circle(SKETCH22_R)
        with Locations(Location((53.000000000000014, -121.25000000000003, 0), (0, 0, 270))):
            Circle(SKETCH22_R_2)
        with Locations(Location((53.000000000000014, -124.25000000000003, 0), (0, 0, 270))):
            Circle(SKETCH22_R_2)
        with Locations(Location((48.000000000000014, -122.75000000000003, 0), (0, 0, 270))):
            Circle(SKETCH22_R_3)
    extrude(amount=-CUT_EXTRUDE12_DEPTH, mode=Mode.SUBTRACT)

    # Sketch23 → Cut-Extrude13 (cut)
    with BuildSketch(Plane.XZ.offset(-105)):
        with Locations((5.748765940339929, 69.87855319631414)):
            Rectangle(SKETCH23_W, SKETCH23_H)
    extrude(amount=-CUT_EXTRUDE13_DEPTH, mode=Mode.SUBTRACT)


with BuildPart() as cut_extrude6_piece_2:
    # of the separate pieces the step leaves, piece 2, a body of its own (cut_extrude6_pieces)
    add(part_1.part.solids().sort_by_distance((-78, 2, -32.75))[0])

    # Sketch18 → Cut-Extrude7 (cut)
    with BuildSketch(Plane.XZ.offset(-99.99999999999999)):
        Rectangle(SKETCH18_W, SKETCH18_H)
    extrude(amount=CUT_EXTRUDE7_DEPTH, mode=Mode.SUBTRACT)


with BuildPart() as cut_extrude13_piece_1:
    # of the separate pieces the step leaves, piece 1, a body of its own (cut_extrude13_pieces)
    add(cut_extrude6_piece_1.part.solids().sort_by_distance((-79.25, 105, 59.878553196))[0])

    # Sketch24 → Cut-Extrude14 (cut)
    with BuildSketch(Plane.XY.offset(59.87855319631415)):
        with Locations((-2.9102395598225, 105.25)):
            Rectangle(SKETCH24_W, SKETCH24_H)
    extrude(amount=-CUT_EXTRUDE14_DEPTH, mode=Mode.SUBTRACT)


with BuildPart() as cut_extrude13_piece_2:
    # of the separate pieces the step leaves, piece 2, a body of its own (cut_extrude13_pieces)
    add(cut_extrude6_piece_1.part.solids().sort_by_distance((-78, 105.25, 159))[0])


solid = cut_extrude13_piece_2.part
